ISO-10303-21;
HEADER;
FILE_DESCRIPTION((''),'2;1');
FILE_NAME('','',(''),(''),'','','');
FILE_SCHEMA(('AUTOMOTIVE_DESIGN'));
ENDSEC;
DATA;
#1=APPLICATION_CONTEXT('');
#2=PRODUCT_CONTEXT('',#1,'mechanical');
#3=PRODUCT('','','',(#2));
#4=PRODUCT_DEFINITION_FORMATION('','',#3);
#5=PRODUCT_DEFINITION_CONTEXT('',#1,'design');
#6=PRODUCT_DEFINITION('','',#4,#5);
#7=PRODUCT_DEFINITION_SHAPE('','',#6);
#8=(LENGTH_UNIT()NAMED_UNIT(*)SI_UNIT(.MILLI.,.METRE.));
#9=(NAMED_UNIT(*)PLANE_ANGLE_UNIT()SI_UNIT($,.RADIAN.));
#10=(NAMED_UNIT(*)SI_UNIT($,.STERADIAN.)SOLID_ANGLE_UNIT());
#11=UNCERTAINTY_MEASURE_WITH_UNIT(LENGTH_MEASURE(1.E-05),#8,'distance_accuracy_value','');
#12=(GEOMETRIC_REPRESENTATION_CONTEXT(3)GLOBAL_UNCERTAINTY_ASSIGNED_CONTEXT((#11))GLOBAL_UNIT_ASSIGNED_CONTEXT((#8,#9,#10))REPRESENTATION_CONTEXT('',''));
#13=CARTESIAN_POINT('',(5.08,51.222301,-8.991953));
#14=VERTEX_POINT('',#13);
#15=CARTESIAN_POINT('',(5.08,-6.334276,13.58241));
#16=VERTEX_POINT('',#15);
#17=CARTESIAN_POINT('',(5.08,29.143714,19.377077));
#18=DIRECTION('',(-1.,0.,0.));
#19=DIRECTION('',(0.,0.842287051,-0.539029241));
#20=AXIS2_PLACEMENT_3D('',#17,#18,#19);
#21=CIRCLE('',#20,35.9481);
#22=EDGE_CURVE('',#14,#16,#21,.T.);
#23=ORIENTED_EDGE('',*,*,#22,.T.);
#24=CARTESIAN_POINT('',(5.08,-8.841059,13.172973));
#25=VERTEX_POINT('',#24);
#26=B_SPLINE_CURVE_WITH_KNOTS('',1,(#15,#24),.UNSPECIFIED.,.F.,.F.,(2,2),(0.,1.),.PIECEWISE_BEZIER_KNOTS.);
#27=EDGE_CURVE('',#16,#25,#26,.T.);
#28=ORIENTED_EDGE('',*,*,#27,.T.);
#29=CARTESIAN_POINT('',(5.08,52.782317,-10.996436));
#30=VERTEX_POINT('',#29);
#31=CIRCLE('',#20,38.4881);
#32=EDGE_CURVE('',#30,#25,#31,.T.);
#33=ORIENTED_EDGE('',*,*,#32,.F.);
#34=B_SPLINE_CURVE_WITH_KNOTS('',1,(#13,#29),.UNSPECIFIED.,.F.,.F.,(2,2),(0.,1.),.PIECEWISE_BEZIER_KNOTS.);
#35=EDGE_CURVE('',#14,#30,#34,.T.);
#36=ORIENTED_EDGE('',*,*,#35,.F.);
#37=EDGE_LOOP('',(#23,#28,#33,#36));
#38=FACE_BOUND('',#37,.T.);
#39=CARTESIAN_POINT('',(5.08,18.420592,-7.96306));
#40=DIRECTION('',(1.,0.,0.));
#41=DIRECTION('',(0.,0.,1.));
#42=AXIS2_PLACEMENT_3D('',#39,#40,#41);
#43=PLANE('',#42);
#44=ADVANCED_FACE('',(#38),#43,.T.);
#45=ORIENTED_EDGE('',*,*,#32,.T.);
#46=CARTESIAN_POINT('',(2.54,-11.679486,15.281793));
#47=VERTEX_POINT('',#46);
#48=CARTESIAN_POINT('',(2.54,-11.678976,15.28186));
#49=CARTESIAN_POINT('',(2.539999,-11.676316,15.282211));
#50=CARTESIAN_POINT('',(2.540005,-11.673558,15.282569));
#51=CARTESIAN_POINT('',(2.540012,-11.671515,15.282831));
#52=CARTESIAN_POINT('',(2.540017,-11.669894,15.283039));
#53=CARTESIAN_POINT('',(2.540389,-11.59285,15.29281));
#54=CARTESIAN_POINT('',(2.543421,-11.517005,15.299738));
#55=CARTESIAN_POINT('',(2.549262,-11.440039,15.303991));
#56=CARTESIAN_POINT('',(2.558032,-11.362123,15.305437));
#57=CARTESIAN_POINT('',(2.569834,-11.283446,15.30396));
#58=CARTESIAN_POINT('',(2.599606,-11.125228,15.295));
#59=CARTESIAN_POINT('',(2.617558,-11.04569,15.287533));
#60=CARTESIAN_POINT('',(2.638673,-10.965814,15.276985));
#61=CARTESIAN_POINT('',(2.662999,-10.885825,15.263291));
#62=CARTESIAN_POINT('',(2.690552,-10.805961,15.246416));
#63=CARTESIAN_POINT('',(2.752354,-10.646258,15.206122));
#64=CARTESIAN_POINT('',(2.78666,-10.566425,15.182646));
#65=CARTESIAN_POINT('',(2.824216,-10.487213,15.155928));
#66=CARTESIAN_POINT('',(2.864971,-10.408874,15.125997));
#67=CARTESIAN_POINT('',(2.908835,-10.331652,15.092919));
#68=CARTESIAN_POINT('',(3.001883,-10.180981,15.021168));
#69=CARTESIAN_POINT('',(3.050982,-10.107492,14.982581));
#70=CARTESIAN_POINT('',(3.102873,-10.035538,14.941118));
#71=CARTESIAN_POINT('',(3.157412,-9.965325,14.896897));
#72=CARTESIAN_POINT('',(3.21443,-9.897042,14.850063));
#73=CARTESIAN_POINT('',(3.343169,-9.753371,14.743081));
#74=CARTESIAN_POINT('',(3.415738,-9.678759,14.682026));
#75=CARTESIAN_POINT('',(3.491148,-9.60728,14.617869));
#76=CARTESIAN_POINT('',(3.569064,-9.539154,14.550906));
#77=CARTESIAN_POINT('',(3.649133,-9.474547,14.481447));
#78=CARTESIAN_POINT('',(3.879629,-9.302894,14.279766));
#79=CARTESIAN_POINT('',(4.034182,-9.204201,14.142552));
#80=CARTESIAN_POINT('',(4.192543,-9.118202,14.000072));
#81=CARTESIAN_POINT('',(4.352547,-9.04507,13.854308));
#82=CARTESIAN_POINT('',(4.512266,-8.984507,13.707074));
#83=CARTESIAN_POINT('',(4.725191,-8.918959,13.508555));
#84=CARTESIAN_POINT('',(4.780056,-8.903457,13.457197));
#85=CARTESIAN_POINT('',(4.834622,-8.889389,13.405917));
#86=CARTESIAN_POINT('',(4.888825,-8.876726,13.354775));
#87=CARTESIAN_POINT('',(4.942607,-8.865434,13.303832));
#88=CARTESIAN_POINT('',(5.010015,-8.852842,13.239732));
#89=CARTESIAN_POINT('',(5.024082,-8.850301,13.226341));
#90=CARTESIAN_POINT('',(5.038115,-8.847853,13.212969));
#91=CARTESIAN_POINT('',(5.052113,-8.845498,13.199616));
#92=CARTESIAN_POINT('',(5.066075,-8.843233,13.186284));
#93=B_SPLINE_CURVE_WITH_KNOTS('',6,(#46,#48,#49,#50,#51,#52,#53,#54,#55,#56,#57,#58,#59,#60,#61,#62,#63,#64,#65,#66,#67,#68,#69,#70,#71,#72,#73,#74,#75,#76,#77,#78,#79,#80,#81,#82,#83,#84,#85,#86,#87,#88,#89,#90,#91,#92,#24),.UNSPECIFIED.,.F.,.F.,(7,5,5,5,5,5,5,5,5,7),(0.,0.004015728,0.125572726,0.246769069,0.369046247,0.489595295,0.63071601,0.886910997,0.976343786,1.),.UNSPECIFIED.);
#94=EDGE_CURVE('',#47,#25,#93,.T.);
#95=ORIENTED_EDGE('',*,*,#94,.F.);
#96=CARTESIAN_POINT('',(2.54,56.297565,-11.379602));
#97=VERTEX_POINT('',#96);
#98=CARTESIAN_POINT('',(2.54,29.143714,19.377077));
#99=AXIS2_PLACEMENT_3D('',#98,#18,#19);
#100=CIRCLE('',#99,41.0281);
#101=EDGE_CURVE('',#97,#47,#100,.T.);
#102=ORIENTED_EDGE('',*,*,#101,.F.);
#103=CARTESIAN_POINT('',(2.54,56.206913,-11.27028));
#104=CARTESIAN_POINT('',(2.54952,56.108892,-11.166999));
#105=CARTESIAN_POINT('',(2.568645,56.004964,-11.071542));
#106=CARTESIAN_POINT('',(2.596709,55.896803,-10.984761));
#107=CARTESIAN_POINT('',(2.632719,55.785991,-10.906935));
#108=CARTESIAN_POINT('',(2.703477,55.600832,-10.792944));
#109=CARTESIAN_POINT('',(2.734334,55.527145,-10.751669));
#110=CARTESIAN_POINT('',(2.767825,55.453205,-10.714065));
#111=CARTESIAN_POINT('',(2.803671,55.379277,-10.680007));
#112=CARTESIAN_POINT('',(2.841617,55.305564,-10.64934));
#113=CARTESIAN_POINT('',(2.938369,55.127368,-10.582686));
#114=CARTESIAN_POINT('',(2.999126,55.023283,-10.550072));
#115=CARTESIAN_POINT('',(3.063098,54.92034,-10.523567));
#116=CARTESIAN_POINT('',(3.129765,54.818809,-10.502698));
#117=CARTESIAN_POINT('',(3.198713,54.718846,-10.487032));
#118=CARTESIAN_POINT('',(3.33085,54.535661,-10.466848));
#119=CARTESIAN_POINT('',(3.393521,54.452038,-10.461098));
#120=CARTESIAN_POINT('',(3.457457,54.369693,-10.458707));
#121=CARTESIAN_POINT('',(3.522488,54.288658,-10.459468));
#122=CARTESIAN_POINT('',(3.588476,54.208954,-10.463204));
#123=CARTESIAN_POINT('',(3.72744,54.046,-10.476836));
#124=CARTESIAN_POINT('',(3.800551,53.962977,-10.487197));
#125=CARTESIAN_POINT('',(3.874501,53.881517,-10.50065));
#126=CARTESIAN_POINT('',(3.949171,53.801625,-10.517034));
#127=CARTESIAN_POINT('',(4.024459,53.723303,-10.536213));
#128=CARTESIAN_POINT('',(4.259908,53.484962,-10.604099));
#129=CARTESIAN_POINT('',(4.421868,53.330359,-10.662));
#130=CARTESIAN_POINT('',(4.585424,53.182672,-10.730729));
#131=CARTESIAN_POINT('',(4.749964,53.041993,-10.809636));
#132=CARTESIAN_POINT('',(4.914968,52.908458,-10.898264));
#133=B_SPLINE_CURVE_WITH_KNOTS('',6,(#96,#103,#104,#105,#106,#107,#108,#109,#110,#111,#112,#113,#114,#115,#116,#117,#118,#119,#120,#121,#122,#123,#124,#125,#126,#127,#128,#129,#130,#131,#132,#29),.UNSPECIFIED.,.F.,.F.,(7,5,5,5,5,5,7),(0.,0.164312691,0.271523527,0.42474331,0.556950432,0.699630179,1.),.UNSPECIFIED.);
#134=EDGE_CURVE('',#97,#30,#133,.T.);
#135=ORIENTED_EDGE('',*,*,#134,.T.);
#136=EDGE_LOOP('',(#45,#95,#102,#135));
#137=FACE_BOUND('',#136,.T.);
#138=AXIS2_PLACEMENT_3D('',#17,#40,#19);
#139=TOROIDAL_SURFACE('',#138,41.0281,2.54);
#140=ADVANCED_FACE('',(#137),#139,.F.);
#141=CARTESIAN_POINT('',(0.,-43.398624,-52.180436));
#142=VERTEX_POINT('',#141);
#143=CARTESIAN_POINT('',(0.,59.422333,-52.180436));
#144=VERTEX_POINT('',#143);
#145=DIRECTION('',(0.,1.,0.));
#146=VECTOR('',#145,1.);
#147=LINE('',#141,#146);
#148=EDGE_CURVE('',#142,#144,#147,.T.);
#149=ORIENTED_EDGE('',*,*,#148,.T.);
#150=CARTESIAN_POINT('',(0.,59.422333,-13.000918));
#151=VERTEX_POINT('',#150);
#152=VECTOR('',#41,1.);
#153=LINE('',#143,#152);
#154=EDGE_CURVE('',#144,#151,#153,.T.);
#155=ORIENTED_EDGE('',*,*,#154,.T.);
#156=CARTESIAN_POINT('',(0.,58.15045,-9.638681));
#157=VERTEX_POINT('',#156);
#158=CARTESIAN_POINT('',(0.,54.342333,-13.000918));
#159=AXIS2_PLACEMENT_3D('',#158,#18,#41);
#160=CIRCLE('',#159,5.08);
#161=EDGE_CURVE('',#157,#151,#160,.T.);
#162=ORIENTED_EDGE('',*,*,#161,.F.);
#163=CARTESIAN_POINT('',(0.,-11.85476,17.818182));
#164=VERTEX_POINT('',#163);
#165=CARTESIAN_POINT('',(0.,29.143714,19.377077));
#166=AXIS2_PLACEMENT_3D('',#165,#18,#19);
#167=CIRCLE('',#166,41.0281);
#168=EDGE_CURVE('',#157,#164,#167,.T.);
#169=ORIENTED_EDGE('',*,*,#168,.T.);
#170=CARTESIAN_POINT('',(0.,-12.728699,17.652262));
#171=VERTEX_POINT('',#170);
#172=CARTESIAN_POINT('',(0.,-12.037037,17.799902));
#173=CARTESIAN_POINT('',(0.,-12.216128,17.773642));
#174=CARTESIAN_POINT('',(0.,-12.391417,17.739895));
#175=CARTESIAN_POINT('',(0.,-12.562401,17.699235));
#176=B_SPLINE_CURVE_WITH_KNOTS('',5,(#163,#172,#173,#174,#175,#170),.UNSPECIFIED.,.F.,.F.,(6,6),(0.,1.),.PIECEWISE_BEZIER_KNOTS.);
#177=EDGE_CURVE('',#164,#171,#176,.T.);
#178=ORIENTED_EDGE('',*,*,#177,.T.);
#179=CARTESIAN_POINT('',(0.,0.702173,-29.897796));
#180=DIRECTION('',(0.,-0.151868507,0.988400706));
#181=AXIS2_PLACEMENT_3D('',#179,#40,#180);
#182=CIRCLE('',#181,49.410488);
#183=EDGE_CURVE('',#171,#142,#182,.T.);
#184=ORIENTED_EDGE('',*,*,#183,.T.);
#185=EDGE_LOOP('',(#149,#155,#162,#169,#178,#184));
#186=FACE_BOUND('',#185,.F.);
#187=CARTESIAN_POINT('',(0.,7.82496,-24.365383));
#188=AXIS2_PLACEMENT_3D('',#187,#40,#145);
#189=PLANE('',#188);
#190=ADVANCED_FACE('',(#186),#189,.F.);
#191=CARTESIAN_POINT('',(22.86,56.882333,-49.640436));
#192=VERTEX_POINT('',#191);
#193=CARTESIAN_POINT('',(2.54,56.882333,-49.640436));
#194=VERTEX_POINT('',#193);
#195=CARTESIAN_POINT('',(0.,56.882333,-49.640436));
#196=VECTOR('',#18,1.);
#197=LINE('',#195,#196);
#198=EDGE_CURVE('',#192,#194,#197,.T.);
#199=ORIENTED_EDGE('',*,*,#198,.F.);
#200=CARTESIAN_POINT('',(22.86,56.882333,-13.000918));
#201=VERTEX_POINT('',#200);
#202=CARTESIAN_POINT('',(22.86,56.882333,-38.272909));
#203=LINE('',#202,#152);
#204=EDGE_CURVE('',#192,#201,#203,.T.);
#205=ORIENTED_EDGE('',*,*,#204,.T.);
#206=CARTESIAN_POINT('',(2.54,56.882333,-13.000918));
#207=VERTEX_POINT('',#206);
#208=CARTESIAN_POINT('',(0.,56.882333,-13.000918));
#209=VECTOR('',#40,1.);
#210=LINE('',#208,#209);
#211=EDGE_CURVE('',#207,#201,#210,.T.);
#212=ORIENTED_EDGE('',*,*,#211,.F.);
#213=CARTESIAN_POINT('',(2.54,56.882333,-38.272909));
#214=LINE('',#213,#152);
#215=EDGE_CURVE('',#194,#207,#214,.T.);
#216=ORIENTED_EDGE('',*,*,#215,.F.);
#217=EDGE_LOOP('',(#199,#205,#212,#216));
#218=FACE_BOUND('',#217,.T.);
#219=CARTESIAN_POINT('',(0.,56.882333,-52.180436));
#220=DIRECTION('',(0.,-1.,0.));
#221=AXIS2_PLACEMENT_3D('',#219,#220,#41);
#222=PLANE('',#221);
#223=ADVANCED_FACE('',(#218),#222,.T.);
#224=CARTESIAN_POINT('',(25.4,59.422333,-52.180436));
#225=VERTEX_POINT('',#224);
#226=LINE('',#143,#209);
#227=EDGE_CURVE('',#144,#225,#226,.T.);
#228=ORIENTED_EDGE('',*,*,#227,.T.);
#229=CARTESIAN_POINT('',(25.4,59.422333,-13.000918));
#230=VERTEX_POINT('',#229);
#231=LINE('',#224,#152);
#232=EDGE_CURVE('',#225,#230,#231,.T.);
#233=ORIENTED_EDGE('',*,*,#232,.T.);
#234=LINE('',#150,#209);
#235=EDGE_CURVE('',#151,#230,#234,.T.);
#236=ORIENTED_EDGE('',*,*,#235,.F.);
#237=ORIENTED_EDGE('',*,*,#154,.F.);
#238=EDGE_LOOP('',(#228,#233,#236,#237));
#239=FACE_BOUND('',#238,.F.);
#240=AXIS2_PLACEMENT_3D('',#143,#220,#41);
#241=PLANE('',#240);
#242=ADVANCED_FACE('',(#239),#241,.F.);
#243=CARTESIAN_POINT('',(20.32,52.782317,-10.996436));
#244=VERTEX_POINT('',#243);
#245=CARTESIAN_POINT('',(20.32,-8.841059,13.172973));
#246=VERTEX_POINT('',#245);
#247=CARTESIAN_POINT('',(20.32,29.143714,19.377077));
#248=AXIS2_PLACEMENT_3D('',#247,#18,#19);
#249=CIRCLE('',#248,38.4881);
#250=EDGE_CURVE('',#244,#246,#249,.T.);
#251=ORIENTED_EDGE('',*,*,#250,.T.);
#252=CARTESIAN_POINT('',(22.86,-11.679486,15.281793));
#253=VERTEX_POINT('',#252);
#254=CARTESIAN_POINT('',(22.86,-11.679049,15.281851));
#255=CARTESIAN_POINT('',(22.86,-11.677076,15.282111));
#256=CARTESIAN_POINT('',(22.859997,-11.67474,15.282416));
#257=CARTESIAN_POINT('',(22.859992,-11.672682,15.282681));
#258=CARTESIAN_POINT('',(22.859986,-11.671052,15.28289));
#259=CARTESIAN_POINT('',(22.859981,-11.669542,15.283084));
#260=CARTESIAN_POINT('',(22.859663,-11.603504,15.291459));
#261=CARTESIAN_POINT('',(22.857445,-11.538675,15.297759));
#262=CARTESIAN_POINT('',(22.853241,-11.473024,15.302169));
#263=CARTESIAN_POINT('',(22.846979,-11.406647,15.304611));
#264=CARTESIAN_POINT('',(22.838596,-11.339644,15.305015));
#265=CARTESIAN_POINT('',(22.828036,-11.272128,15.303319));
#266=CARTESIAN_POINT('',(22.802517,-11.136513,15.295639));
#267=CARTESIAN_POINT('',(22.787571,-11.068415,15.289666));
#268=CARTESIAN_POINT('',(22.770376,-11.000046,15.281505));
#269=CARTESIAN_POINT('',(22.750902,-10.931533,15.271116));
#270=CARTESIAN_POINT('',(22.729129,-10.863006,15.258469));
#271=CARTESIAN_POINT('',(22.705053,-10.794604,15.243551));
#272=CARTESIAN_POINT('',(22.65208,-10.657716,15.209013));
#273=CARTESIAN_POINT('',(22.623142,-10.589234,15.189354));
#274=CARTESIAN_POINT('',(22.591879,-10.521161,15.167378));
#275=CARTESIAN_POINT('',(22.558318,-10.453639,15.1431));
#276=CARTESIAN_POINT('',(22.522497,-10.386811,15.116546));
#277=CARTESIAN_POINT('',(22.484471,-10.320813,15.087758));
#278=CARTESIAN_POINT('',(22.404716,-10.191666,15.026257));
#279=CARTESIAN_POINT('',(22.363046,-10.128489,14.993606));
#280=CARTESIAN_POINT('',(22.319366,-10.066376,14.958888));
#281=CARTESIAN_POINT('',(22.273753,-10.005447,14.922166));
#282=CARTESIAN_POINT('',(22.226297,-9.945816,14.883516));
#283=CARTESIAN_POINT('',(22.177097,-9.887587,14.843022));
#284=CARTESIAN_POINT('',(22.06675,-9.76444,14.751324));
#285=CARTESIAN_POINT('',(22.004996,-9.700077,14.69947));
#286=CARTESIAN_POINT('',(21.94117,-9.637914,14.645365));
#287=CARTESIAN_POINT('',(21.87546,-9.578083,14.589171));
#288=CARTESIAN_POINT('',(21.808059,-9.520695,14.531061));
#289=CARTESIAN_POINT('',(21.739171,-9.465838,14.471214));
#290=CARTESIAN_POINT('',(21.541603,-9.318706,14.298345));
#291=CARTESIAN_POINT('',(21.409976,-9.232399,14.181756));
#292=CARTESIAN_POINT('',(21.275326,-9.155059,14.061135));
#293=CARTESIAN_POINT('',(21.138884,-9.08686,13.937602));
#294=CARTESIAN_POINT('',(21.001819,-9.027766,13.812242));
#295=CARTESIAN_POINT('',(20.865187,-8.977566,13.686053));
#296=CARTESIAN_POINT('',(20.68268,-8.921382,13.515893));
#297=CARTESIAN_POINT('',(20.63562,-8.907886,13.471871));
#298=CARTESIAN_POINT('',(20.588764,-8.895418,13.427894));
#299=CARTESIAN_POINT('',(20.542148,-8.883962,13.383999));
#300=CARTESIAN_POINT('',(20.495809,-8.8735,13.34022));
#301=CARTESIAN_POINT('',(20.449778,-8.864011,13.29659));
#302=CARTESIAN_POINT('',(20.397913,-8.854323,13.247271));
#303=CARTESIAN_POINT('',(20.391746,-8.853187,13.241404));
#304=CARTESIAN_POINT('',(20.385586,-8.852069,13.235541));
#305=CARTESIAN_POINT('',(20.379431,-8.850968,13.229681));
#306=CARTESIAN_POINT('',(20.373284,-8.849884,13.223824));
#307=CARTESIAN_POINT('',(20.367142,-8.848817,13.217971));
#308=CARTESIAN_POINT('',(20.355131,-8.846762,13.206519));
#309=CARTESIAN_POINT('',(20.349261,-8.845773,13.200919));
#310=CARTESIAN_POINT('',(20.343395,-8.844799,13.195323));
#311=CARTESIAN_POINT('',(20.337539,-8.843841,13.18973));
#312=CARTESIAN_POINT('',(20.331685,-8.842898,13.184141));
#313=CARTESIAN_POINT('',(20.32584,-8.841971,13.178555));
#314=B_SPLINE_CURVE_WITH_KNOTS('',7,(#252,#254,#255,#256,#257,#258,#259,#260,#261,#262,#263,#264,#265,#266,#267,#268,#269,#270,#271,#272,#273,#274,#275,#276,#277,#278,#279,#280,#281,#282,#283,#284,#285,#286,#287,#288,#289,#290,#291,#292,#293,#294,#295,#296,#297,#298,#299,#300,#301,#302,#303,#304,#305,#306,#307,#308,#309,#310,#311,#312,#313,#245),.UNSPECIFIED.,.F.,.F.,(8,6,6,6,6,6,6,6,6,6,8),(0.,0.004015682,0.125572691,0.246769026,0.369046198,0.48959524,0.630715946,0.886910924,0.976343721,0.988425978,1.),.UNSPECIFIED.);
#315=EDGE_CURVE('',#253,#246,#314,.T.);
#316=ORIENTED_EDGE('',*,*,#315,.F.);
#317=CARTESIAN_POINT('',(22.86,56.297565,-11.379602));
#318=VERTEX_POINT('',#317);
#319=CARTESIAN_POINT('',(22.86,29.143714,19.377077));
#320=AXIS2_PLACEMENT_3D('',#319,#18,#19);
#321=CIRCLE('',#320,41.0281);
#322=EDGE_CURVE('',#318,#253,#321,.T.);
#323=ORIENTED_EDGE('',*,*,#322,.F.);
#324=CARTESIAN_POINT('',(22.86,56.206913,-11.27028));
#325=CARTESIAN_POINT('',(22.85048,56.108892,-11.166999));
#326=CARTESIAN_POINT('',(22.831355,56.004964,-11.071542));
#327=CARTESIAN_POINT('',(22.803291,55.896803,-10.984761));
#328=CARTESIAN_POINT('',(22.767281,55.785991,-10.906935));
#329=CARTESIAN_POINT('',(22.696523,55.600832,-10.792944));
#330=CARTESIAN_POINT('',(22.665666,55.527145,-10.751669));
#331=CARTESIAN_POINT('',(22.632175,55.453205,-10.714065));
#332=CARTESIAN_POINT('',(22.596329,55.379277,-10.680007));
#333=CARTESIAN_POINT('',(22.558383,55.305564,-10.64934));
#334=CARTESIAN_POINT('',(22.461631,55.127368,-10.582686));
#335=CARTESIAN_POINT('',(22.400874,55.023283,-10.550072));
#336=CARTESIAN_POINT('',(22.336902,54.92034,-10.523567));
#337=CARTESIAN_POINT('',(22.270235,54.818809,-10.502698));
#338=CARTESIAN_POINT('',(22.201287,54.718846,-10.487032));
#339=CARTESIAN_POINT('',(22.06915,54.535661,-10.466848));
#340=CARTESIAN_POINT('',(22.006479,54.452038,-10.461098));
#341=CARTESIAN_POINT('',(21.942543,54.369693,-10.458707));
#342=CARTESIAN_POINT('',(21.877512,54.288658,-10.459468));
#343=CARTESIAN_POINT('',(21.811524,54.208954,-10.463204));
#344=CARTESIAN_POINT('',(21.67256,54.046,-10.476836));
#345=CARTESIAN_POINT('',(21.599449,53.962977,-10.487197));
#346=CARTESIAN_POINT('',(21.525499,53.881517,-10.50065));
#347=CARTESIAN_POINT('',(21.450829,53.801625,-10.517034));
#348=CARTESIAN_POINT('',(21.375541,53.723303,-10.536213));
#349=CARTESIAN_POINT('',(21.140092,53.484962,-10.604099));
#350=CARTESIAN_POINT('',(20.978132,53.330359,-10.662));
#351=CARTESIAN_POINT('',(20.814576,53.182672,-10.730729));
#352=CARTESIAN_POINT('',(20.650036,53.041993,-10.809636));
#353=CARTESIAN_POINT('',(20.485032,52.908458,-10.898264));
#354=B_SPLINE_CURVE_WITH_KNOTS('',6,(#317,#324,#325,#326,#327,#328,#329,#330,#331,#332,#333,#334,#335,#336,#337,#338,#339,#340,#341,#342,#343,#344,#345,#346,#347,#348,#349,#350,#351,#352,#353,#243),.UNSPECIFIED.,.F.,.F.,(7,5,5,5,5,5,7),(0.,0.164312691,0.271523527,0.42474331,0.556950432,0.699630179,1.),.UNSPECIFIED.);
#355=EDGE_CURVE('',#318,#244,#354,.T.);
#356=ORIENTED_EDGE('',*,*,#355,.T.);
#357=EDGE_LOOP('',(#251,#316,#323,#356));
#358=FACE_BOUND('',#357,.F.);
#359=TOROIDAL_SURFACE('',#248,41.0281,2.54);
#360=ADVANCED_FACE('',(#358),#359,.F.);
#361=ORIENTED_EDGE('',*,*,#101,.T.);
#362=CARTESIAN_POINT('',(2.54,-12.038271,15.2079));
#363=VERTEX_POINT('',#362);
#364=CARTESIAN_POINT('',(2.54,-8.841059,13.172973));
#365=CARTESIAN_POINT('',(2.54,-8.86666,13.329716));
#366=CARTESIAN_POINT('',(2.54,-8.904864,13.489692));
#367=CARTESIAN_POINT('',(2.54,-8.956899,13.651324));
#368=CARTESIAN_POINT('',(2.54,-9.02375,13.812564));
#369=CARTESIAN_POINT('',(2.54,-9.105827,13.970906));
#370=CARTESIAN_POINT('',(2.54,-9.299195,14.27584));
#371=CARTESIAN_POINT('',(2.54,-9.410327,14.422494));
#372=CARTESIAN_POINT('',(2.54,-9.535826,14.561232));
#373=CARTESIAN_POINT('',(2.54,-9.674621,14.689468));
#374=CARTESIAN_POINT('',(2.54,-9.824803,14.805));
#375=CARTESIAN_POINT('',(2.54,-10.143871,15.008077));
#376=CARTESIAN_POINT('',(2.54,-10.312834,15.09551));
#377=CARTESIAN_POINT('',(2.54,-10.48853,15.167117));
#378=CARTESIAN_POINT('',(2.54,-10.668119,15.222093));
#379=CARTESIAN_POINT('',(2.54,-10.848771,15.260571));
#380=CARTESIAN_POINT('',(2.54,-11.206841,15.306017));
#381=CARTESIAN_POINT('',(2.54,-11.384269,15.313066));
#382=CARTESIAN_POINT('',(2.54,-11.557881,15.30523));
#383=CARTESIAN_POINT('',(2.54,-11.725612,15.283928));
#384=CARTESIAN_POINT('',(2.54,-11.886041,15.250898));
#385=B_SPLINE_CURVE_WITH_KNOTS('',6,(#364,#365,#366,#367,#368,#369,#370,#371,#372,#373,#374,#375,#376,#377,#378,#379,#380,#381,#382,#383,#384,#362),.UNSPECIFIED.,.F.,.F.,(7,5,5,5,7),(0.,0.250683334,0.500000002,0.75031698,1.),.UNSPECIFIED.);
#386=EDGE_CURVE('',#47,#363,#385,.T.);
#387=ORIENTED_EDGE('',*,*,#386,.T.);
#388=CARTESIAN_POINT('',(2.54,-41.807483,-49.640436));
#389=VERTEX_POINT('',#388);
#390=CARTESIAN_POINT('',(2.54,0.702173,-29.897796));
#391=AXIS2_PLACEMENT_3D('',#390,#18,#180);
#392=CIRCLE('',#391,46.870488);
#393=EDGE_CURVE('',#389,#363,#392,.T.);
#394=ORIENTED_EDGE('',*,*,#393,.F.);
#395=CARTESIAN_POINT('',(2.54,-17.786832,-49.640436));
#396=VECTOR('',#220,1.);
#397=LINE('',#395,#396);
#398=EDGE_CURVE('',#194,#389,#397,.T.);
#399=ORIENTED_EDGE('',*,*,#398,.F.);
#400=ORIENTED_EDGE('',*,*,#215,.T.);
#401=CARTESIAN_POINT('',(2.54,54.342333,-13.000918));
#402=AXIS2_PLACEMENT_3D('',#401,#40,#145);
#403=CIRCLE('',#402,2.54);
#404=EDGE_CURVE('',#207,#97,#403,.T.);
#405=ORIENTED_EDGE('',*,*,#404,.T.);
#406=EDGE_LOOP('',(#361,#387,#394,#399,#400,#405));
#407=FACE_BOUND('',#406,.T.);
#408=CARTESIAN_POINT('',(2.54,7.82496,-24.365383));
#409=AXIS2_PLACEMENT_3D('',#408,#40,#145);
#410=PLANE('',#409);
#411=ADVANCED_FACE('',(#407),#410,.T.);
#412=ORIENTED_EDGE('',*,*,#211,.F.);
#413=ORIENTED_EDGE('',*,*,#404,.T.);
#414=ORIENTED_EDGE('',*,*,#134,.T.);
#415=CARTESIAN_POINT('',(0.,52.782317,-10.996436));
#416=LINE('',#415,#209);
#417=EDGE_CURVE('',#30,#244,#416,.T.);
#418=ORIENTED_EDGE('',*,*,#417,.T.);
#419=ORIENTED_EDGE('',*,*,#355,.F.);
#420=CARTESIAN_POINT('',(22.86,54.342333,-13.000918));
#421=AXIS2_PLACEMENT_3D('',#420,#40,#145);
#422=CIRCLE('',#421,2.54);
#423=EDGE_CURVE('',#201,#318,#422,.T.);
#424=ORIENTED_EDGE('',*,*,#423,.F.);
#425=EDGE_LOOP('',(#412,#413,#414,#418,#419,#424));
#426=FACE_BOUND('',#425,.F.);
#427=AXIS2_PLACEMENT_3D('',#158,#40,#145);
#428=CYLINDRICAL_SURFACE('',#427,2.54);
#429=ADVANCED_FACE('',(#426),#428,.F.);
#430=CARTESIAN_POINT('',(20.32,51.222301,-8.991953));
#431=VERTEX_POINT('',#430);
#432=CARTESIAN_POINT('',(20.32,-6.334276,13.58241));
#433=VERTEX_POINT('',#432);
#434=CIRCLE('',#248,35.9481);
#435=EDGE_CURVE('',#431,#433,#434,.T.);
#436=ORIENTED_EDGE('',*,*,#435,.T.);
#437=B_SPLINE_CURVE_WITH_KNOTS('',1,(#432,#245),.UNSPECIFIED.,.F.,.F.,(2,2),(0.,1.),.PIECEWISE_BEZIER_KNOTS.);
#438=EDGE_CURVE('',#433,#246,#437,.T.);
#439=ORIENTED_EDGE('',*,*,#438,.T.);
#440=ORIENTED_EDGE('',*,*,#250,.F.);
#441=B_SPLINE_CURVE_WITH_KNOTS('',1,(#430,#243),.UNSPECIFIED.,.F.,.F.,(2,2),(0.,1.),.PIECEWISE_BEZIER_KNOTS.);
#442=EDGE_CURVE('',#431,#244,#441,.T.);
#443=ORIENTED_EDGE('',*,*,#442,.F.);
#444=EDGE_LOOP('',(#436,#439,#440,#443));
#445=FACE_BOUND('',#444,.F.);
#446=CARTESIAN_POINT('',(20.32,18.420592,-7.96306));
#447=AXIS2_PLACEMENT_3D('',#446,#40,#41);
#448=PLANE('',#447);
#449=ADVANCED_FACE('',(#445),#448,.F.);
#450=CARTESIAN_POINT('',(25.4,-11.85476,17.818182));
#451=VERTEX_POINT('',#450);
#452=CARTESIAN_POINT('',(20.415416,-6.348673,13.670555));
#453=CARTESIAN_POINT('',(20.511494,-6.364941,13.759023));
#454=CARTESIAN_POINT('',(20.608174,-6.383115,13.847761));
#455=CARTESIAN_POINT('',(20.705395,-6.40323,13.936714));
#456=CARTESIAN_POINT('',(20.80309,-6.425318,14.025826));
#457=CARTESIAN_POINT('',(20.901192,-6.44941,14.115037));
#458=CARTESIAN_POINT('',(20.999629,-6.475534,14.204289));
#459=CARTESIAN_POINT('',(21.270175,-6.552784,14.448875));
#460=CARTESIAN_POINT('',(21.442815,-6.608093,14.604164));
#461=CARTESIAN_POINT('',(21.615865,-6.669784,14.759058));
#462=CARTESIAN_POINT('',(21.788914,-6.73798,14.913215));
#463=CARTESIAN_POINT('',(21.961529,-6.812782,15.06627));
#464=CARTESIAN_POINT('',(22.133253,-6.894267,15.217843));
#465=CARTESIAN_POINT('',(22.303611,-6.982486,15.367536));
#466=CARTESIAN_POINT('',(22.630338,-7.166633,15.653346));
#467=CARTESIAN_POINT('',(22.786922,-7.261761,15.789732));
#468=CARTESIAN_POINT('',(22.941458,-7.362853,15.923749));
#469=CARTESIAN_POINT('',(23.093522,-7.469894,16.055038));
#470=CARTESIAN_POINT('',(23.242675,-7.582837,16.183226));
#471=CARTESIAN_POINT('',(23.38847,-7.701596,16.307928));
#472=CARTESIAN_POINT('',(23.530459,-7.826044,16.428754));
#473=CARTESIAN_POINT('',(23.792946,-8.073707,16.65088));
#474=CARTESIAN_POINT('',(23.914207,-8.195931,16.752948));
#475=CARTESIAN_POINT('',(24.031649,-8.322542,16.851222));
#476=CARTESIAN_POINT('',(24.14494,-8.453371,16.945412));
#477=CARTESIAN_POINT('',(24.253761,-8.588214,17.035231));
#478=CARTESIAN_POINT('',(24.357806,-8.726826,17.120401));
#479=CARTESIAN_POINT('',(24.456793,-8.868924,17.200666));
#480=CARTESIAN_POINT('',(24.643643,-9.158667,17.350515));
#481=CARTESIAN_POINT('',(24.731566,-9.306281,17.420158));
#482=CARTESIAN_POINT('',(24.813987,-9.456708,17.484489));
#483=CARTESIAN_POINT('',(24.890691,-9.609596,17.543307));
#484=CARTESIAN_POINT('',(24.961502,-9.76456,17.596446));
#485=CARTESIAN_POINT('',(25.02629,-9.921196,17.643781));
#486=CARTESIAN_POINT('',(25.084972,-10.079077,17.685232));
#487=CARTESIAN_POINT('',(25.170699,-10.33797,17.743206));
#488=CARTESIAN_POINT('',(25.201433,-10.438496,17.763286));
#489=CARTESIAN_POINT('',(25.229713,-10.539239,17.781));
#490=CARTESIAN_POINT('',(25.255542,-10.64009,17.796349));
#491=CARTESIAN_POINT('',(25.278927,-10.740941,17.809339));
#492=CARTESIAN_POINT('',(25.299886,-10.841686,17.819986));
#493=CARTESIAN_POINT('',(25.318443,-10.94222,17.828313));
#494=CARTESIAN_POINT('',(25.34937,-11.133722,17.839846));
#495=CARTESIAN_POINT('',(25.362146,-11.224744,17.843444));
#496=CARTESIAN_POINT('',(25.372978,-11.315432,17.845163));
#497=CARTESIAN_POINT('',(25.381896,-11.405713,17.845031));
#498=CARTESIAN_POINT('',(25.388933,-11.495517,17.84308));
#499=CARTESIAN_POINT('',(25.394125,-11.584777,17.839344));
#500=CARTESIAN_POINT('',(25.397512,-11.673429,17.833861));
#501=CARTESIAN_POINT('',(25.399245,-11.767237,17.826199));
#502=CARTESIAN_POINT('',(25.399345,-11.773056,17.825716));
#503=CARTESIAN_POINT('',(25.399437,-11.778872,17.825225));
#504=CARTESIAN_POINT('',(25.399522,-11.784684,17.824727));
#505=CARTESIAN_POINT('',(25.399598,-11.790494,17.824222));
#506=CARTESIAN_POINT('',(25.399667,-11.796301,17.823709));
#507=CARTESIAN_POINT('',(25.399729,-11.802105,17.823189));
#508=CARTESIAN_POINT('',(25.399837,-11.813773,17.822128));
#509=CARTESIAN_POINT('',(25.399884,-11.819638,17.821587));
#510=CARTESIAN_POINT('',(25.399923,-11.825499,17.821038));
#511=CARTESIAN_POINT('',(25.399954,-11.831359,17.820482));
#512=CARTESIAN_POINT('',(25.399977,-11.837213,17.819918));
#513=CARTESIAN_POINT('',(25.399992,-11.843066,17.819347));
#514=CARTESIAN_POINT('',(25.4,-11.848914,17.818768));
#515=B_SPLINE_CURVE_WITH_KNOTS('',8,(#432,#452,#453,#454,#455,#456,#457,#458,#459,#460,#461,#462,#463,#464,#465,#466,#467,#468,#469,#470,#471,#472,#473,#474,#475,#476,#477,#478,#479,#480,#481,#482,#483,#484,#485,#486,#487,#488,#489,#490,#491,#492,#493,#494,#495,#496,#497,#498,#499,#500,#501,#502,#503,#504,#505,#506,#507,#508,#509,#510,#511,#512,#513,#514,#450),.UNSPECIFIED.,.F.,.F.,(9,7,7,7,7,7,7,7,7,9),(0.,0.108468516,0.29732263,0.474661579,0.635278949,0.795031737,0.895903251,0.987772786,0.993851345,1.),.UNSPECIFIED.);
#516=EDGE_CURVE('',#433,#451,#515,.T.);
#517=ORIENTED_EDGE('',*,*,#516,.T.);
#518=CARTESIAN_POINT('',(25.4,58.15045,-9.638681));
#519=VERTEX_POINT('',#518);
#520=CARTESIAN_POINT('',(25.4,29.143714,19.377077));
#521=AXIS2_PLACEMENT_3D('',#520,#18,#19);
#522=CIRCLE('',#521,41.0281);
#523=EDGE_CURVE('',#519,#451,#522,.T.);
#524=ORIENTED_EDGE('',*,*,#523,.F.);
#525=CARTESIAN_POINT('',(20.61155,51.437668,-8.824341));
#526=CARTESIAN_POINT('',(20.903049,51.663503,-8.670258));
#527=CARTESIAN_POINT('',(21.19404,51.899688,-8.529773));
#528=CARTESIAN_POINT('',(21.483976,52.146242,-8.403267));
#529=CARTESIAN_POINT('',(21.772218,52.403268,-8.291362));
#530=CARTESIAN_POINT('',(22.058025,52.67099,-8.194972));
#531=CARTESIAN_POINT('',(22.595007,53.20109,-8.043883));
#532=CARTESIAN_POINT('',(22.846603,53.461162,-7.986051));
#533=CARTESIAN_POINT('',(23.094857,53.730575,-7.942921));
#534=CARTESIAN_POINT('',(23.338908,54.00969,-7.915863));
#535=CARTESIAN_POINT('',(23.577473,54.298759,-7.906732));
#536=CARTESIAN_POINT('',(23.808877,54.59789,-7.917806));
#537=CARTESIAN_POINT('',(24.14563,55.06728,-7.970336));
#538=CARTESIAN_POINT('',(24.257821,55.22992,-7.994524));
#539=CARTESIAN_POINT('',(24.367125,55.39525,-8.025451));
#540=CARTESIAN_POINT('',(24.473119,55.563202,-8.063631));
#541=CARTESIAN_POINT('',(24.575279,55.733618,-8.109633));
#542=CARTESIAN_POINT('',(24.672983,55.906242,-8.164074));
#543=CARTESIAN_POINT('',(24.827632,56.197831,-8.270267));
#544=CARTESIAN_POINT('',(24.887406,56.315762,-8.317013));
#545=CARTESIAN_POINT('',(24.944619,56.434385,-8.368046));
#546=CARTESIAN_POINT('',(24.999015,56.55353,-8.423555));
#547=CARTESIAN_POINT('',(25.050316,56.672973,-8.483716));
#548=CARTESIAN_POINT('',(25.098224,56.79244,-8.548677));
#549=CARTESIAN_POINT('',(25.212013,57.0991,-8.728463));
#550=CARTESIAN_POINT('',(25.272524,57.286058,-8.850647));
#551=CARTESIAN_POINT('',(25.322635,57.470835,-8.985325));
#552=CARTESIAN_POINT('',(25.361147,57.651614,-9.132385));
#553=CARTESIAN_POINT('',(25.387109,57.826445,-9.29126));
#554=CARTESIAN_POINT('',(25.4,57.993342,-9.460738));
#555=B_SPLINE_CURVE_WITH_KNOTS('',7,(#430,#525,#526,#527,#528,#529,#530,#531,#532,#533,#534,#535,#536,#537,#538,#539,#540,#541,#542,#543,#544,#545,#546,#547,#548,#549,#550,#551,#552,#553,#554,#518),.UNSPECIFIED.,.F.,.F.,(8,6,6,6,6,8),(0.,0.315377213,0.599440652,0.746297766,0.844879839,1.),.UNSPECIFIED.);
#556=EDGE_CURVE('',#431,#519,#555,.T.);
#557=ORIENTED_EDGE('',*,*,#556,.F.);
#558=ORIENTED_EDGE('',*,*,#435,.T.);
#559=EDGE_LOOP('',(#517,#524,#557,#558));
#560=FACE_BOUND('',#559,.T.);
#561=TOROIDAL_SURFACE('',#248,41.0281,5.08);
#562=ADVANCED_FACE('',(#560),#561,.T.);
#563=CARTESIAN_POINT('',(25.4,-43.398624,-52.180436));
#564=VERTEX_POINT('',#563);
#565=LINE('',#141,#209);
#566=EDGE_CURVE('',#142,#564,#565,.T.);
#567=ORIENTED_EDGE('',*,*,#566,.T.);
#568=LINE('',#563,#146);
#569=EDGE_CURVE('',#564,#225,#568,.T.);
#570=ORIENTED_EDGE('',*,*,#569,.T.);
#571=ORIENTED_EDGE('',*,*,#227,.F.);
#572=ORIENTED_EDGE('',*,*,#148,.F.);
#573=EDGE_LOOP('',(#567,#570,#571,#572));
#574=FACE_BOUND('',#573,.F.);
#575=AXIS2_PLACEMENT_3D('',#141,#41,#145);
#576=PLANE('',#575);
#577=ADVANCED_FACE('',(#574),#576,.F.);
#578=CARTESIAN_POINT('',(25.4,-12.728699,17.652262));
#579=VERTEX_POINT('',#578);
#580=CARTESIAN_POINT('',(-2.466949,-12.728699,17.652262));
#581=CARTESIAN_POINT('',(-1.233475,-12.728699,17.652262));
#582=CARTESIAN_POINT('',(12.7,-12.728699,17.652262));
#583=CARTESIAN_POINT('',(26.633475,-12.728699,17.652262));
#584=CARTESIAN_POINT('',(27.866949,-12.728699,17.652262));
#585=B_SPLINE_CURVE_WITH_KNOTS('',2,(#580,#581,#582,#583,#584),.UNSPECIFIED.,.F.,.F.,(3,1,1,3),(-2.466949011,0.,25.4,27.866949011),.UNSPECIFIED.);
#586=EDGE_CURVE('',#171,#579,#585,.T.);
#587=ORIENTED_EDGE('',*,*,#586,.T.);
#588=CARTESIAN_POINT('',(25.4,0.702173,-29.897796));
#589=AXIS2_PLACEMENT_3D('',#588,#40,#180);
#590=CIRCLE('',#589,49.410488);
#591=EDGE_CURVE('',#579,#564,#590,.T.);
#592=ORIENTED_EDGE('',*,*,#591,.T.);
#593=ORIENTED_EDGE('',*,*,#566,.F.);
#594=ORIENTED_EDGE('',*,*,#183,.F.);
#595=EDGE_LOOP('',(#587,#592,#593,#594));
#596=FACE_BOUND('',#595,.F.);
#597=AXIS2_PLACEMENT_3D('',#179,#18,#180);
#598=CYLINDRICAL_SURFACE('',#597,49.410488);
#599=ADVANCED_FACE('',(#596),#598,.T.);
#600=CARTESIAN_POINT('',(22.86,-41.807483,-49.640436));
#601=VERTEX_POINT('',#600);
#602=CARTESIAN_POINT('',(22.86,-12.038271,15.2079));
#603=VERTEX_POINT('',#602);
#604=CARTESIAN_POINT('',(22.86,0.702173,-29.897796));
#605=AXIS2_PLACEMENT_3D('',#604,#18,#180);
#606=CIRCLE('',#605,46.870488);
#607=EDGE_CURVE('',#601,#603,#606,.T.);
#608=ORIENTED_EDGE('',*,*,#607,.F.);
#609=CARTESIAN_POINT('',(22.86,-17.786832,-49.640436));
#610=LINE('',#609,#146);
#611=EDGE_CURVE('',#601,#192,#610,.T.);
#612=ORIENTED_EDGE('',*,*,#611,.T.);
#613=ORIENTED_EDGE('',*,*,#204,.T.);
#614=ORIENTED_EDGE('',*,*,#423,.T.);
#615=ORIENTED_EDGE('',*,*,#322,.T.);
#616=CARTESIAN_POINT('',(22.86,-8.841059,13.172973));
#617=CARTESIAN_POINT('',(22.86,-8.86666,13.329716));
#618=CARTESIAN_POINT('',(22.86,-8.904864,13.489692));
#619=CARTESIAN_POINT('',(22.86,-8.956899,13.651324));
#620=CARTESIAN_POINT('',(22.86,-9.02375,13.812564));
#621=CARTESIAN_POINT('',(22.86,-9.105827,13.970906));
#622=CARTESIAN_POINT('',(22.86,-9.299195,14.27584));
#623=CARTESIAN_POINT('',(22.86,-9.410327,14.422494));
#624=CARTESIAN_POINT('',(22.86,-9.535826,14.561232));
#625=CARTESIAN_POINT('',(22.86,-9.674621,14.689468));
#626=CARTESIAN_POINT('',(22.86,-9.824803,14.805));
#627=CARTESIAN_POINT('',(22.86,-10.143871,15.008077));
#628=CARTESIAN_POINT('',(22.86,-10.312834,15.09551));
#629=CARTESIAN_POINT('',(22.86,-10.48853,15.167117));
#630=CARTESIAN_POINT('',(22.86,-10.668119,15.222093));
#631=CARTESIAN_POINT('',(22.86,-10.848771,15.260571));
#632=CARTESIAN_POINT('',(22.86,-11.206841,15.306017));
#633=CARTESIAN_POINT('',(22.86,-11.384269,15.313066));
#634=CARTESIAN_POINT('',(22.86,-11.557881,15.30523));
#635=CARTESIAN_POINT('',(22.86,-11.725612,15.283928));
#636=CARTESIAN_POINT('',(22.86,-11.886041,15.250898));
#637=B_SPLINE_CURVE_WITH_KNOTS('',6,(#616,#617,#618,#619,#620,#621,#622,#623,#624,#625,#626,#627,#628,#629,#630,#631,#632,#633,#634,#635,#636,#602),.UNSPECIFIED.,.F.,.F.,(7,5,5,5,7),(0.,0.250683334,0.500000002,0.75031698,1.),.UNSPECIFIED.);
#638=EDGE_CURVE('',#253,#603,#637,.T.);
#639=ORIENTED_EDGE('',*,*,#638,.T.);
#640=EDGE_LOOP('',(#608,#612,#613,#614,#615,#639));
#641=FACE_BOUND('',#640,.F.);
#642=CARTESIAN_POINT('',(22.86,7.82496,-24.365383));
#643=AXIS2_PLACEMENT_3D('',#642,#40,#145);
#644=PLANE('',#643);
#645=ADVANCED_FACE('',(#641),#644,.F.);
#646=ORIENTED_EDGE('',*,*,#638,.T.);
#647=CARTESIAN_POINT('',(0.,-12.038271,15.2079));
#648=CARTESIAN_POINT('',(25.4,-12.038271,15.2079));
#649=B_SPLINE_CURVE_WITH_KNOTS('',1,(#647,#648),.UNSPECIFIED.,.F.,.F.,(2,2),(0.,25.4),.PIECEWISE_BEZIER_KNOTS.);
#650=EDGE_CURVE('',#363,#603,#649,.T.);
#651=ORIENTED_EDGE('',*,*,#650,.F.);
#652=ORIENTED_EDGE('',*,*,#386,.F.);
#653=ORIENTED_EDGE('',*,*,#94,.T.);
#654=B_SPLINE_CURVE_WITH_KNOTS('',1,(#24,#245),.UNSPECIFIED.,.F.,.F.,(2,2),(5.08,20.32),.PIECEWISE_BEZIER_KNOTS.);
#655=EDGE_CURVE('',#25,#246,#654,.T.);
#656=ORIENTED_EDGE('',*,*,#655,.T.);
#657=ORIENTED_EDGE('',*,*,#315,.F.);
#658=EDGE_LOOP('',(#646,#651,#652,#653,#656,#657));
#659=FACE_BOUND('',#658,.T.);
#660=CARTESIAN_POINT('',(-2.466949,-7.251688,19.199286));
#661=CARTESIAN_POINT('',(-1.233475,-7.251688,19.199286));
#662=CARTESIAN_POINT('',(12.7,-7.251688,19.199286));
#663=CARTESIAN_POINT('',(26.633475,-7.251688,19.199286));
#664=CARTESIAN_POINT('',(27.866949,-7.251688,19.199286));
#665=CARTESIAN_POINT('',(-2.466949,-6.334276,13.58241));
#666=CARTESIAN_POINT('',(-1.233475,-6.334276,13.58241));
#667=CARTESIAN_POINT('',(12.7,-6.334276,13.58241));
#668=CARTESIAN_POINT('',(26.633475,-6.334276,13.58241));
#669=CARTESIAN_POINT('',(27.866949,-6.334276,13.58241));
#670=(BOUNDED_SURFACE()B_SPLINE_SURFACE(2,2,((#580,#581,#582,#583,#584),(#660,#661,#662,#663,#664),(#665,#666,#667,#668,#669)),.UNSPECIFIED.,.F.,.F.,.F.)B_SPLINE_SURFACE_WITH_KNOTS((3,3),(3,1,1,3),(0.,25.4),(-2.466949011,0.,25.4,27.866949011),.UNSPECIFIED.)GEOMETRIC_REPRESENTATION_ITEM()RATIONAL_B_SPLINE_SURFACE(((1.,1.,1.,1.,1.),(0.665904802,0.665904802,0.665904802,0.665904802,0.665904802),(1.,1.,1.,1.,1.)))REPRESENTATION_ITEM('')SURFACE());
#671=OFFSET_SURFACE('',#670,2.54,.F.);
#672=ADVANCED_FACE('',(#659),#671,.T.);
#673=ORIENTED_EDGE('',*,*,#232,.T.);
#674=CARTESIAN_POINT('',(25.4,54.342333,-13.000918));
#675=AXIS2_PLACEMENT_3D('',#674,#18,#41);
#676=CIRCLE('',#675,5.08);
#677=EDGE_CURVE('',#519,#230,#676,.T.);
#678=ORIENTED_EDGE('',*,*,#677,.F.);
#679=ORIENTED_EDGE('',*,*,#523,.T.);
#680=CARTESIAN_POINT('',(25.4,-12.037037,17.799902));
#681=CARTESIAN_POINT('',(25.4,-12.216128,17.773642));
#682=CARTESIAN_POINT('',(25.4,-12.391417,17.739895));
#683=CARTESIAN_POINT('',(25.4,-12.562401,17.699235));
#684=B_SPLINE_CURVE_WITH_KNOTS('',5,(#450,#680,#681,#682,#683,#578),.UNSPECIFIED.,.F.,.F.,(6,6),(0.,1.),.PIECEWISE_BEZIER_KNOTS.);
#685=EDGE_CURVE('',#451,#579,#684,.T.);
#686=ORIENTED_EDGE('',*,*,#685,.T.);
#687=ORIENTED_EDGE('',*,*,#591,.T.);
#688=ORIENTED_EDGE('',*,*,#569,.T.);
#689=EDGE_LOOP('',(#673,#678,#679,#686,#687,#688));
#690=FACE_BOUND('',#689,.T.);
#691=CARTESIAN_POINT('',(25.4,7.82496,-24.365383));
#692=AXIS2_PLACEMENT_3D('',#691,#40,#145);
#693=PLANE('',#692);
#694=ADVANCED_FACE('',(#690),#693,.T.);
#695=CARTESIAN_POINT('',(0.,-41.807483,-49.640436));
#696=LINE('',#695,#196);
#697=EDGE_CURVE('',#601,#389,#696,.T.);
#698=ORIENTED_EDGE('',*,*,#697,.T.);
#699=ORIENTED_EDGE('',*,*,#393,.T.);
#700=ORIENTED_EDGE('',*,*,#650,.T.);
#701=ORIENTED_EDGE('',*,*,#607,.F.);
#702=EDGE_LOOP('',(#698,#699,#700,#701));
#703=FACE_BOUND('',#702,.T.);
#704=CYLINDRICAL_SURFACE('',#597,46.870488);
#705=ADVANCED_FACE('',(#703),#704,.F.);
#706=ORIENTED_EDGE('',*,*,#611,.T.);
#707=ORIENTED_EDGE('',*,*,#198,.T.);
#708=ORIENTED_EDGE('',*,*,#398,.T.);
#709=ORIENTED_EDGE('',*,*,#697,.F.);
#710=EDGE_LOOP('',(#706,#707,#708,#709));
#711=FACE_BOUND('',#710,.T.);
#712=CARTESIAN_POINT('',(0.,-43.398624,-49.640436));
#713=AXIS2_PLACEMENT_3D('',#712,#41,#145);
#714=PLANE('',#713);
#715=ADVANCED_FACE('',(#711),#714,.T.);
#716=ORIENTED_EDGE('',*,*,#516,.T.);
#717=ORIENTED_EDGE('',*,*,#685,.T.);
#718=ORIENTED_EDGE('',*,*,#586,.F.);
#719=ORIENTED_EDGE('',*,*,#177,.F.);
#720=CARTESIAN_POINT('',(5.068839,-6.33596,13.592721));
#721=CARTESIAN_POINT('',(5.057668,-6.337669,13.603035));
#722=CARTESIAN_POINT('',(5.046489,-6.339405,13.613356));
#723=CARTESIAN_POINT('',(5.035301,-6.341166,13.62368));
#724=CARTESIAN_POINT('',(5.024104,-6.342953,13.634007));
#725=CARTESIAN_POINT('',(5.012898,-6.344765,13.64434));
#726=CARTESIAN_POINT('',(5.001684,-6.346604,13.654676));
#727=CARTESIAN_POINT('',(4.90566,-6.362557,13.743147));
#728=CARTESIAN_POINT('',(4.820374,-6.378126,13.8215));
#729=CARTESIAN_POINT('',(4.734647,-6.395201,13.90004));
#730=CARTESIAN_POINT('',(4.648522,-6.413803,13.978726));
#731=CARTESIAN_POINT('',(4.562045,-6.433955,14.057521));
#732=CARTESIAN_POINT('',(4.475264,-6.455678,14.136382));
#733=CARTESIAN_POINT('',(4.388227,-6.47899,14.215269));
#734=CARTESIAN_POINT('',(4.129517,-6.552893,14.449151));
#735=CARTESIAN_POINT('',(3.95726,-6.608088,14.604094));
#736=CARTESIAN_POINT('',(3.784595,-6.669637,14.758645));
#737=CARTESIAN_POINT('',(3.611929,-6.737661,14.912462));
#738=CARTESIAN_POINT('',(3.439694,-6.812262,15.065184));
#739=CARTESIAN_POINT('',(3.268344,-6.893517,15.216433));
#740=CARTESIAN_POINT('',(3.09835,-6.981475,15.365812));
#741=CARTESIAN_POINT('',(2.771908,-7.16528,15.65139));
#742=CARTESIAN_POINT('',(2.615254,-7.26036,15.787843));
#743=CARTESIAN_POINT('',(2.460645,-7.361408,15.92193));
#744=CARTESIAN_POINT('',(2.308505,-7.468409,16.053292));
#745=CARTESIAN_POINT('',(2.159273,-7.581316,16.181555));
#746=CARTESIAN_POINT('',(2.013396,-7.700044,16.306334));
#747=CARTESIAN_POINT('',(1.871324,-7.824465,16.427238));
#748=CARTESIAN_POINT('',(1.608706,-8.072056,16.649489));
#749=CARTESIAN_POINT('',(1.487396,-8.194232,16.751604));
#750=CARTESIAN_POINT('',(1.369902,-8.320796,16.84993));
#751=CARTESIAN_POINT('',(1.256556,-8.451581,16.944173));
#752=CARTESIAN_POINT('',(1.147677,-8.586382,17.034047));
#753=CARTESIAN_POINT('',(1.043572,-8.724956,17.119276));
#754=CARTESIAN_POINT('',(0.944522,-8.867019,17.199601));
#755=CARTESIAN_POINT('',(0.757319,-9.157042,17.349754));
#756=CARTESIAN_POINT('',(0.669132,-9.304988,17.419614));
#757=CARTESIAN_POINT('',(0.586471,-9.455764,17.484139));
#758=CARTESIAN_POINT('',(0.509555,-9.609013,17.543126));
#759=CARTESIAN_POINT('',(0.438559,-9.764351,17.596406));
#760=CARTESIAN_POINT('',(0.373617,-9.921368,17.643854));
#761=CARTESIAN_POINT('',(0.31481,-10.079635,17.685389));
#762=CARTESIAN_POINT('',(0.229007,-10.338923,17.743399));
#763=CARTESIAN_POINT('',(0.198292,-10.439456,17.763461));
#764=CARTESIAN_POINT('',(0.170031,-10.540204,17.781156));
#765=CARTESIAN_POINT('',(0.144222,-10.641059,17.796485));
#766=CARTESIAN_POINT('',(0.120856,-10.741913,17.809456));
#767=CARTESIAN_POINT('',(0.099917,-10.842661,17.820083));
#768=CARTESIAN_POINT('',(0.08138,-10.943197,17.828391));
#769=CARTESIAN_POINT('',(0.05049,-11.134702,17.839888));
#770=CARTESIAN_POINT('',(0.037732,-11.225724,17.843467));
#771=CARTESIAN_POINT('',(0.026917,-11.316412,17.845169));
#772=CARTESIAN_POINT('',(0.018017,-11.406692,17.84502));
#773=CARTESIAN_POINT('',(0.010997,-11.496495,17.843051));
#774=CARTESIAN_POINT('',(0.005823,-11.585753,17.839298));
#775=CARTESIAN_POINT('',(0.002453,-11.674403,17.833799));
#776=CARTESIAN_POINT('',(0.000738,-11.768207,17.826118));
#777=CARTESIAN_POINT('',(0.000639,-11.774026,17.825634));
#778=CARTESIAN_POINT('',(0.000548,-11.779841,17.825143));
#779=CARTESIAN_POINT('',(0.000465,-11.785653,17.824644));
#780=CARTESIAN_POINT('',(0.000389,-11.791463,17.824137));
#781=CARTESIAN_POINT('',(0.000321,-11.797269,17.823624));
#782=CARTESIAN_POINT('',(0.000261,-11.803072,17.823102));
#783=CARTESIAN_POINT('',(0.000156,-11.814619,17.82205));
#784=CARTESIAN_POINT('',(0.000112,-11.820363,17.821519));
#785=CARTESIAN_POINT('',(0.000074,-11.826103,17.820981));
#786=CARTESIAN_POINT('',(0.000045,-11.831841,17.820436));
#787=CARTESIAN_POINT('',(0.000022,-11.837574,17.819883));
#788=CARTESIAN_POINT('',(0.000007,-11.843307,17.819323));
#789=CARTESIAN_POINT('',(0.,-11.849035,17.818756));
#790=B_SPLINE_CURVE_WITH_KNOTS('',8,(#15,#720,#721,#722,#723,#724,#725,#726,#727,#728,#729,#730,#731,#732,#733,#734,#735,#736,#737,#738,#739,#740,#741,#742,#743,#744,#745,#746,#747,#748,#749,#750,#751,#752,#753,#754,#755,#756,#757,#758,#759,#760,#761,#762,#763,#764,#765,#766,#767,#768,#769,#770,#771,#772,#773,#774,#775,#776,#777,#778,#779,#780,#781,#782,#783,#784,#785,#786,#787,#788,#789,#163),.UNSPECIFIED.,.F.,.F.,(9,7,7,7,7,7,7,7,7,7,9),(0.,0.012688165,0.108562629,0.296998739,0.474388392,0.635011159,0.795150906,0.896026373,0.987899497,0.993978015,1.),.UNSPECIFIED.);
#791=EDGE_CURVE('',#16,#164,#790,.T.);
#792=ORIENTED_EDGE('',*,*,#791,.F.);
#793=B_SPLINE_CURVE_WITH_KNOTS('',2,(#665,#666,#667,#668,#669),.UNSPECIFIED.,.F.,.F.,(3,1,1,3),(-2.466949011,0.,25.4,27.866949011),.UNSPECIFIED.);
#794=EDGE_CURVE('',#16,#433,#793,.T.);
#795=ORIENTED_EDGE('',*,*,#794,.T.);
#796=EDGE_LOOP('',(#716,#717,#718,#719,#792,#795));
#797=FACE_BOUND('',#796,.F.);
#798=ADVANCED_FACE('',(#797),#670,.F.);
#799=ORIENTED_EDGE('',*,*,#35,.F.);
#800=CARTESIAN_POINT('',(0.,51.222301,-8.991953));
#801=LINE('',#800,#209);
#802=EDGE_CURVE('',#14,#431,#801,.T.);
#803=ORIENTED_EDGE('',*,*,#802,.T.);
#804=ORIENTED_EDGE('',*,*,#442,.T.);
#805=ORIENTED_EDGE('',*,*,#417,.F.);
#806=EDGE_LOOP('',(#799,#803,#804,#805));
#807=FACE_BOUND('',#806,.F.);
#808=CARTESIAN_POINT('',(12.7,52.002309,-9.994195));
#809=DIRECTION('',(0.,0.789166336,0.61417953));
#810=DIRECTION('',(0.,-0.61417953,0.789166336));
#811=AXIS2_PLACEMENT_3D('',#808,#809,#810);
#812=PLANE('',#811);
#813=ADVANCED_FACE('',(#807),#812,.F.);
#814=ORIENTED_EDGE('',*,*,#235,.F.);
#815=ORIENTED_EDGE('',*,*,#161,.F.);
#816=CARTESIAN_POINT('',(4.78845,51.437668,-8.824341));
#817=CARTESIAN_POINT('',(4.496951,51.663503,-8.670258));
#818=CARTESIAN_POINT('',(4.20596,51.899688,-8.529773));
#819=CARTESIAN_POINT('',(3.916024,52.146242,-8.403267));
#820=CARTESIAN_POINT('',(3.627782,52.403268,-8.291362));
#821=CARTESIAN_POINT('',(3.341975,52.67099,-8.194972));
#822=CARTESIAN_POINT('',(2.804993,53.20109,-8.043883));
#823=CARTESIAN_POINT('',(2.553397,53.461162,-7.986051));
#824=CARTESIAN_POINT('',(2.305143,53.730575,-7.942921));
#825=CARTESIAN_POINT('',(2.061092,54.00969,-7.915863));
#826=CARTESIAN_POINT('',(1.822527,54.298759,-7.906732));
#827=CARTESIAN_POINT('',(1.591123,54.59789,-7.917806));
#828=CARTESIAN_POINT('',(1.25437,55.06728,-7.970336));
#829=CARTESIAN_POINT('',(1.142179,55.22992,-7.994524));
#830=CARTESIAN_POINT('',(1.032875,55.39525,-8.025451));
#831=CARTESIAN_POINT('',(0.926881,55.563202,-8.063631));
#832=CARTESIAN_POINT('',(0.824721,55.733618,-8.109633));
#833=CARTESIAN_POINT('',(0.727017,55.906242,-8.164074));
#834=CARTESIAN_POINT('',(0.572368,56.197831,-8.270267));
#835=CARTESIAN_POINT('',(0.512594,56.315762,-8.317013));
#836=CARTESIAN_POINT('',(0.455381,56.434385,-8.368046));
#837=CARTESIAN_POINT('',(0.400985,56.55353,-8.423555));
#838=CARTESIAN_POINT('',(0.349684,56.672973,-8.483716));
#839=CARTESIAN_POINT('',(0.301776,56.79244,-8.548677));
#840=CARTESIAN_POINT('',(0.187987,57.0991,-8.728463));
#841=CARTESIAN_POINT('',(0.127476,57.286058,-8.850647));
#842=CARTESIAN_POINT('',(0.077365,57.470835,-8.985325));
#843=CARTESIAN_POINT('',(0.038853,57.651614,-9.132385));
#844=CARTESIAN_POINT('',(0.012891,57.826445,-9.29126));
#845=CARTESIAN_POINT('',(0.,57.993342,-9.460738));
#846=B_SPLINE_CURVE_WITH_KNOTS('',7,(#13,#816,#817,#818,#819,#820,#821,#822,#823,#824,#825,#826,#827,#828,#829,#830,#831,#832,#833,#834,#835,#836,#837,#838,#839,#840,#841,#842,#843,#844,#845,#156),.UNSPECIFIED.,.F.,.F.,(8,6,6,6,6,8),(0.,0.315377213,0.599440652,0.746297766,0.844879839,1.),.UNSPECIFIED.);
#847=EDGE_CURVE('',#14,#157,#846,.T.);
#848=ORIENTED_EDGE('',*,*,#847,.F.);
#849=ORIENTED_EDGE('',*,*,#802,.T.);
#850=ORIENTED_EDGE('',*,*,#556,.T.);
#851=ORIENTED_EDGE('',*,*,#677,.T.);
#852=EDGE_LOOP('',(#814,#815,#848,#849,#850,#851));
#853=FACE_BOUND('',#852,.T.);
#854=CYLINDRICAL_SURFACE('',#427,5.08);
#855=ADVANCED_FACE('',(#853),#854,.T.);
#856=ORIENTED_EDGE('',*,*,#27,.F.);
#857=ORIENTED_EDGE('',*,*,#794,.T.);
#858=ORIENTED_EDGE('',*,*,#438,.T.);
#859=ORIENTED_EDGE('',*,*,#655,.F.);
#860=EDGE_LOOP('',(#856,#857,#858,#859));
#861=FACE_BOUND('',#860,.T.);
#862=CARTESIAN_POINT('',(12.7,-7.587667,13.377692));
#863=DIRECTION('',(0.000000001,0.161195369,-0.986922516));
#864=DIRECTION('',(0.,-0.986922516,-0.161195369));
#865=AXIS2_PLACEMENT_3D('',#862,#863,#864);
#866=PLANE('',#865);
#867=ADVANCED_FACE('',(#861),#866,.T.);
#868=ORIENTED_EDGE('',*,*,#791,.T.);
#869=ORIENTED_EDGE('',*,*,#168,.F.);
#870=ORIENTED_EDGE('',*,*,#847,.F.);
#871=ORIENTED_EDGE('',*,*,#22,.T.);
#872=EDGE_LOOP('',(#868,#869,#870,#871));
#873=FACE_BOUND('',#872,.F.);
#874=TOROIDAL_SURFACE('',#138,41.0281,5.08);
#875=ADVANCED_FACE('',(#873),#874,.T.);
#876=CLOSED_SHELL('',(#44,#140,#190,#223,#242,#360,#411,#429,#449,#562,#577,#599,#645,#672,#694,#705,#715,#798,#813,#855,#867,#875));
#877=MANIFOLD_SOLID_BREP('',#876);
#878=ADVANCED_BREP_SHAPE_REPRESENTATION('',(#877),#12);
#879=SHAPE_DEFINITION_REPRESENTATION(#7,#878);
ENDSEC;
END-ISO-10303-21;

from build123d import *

# Parameters (mm, degrees)
F1_DEPTH = 25.4
F2_R     = 5.08
F3_T     = 2.54


# Not quite as in the source:
# - a shell that OpenCascade refuses in one call is made with other operations: the cavity is built on its own and cut out


with BuildPart() as f1:
    # F0 (on Right) → F1 (new body)
    with BuildSketch(Plane.YZ):
        with BuildLine():
            ThreePointArc((-6.8017239682, 18.9395658672), (-43.2327193048, -7.2897973695), (-43.3986243496, -52.1804355085))
            Line((-43.3986243496, -52.1804355085), (59.4223327935, -52.1804355085))
            Line((59.4223327935, -52.1804355085), (59.4223327935, 0))
            ThreePointArc((59.4223327935, 0), (19.2591298188, -15.1853432617), (-6.8017239682, 18.9395658672))
        make_face()
    extrude(amount=F1_DEPTH)

    # F2
    f2_edges = [f1.edges().sort_by_distance(p)[0] for p in [
        (12.7, 59.422333, 0),
        (12.7, -6.801724, 18.939566),
        (0, 19.25913, -15.185343),
        (25.4, 19.25913, -15.185343),
    ]]
    fillet(f2_edges, radius=F2_R)

    # F3: shell of thickness 2.54, made by hand


with BuildPart() as f3_core1:
    # F3_t2: copy of F1
    add(f1.part)

    # the walls: a layer under each face that stays
    f3_faces = [f3_core1.faces().sort_by_distance(p)[0] for p in [
        (12.7, 59.4223327935, -32.5906768925),
        (0, 5.3570087404, -17.1811267303),
        (12.7, 56.5735474159, -8.4371389974),
        (12.7, 8.0118542219, -52.1804355085),
        (25.4, 5.3570087404, -17.1811267303),
        (1.4878975516, 15.4764567571, -15.4748956916),
        (12.7, -44.5374630823, -10.0289336824),
        (12.7, -8.6201931506, 17.0491329967),
        (23.9121024484, 15.4766540031, -15.4749730413),
    ]]
    thicken(f3_faces, amount=-F3_T, mode=Mode.SUBTRACT)


with BuildPart() as f1_1:
    add(f1.part)

    # what is left inside the walls is the cavity
    f3_cavity = [f3_core1.part.solids().sort_by_distance(p)[0] for p in [
        (22.8346, 5.357009, -27.999693),
    ]]
    add(f3_cavity, mode=Mode.SUBTRACT)


solid = f1_1.part
